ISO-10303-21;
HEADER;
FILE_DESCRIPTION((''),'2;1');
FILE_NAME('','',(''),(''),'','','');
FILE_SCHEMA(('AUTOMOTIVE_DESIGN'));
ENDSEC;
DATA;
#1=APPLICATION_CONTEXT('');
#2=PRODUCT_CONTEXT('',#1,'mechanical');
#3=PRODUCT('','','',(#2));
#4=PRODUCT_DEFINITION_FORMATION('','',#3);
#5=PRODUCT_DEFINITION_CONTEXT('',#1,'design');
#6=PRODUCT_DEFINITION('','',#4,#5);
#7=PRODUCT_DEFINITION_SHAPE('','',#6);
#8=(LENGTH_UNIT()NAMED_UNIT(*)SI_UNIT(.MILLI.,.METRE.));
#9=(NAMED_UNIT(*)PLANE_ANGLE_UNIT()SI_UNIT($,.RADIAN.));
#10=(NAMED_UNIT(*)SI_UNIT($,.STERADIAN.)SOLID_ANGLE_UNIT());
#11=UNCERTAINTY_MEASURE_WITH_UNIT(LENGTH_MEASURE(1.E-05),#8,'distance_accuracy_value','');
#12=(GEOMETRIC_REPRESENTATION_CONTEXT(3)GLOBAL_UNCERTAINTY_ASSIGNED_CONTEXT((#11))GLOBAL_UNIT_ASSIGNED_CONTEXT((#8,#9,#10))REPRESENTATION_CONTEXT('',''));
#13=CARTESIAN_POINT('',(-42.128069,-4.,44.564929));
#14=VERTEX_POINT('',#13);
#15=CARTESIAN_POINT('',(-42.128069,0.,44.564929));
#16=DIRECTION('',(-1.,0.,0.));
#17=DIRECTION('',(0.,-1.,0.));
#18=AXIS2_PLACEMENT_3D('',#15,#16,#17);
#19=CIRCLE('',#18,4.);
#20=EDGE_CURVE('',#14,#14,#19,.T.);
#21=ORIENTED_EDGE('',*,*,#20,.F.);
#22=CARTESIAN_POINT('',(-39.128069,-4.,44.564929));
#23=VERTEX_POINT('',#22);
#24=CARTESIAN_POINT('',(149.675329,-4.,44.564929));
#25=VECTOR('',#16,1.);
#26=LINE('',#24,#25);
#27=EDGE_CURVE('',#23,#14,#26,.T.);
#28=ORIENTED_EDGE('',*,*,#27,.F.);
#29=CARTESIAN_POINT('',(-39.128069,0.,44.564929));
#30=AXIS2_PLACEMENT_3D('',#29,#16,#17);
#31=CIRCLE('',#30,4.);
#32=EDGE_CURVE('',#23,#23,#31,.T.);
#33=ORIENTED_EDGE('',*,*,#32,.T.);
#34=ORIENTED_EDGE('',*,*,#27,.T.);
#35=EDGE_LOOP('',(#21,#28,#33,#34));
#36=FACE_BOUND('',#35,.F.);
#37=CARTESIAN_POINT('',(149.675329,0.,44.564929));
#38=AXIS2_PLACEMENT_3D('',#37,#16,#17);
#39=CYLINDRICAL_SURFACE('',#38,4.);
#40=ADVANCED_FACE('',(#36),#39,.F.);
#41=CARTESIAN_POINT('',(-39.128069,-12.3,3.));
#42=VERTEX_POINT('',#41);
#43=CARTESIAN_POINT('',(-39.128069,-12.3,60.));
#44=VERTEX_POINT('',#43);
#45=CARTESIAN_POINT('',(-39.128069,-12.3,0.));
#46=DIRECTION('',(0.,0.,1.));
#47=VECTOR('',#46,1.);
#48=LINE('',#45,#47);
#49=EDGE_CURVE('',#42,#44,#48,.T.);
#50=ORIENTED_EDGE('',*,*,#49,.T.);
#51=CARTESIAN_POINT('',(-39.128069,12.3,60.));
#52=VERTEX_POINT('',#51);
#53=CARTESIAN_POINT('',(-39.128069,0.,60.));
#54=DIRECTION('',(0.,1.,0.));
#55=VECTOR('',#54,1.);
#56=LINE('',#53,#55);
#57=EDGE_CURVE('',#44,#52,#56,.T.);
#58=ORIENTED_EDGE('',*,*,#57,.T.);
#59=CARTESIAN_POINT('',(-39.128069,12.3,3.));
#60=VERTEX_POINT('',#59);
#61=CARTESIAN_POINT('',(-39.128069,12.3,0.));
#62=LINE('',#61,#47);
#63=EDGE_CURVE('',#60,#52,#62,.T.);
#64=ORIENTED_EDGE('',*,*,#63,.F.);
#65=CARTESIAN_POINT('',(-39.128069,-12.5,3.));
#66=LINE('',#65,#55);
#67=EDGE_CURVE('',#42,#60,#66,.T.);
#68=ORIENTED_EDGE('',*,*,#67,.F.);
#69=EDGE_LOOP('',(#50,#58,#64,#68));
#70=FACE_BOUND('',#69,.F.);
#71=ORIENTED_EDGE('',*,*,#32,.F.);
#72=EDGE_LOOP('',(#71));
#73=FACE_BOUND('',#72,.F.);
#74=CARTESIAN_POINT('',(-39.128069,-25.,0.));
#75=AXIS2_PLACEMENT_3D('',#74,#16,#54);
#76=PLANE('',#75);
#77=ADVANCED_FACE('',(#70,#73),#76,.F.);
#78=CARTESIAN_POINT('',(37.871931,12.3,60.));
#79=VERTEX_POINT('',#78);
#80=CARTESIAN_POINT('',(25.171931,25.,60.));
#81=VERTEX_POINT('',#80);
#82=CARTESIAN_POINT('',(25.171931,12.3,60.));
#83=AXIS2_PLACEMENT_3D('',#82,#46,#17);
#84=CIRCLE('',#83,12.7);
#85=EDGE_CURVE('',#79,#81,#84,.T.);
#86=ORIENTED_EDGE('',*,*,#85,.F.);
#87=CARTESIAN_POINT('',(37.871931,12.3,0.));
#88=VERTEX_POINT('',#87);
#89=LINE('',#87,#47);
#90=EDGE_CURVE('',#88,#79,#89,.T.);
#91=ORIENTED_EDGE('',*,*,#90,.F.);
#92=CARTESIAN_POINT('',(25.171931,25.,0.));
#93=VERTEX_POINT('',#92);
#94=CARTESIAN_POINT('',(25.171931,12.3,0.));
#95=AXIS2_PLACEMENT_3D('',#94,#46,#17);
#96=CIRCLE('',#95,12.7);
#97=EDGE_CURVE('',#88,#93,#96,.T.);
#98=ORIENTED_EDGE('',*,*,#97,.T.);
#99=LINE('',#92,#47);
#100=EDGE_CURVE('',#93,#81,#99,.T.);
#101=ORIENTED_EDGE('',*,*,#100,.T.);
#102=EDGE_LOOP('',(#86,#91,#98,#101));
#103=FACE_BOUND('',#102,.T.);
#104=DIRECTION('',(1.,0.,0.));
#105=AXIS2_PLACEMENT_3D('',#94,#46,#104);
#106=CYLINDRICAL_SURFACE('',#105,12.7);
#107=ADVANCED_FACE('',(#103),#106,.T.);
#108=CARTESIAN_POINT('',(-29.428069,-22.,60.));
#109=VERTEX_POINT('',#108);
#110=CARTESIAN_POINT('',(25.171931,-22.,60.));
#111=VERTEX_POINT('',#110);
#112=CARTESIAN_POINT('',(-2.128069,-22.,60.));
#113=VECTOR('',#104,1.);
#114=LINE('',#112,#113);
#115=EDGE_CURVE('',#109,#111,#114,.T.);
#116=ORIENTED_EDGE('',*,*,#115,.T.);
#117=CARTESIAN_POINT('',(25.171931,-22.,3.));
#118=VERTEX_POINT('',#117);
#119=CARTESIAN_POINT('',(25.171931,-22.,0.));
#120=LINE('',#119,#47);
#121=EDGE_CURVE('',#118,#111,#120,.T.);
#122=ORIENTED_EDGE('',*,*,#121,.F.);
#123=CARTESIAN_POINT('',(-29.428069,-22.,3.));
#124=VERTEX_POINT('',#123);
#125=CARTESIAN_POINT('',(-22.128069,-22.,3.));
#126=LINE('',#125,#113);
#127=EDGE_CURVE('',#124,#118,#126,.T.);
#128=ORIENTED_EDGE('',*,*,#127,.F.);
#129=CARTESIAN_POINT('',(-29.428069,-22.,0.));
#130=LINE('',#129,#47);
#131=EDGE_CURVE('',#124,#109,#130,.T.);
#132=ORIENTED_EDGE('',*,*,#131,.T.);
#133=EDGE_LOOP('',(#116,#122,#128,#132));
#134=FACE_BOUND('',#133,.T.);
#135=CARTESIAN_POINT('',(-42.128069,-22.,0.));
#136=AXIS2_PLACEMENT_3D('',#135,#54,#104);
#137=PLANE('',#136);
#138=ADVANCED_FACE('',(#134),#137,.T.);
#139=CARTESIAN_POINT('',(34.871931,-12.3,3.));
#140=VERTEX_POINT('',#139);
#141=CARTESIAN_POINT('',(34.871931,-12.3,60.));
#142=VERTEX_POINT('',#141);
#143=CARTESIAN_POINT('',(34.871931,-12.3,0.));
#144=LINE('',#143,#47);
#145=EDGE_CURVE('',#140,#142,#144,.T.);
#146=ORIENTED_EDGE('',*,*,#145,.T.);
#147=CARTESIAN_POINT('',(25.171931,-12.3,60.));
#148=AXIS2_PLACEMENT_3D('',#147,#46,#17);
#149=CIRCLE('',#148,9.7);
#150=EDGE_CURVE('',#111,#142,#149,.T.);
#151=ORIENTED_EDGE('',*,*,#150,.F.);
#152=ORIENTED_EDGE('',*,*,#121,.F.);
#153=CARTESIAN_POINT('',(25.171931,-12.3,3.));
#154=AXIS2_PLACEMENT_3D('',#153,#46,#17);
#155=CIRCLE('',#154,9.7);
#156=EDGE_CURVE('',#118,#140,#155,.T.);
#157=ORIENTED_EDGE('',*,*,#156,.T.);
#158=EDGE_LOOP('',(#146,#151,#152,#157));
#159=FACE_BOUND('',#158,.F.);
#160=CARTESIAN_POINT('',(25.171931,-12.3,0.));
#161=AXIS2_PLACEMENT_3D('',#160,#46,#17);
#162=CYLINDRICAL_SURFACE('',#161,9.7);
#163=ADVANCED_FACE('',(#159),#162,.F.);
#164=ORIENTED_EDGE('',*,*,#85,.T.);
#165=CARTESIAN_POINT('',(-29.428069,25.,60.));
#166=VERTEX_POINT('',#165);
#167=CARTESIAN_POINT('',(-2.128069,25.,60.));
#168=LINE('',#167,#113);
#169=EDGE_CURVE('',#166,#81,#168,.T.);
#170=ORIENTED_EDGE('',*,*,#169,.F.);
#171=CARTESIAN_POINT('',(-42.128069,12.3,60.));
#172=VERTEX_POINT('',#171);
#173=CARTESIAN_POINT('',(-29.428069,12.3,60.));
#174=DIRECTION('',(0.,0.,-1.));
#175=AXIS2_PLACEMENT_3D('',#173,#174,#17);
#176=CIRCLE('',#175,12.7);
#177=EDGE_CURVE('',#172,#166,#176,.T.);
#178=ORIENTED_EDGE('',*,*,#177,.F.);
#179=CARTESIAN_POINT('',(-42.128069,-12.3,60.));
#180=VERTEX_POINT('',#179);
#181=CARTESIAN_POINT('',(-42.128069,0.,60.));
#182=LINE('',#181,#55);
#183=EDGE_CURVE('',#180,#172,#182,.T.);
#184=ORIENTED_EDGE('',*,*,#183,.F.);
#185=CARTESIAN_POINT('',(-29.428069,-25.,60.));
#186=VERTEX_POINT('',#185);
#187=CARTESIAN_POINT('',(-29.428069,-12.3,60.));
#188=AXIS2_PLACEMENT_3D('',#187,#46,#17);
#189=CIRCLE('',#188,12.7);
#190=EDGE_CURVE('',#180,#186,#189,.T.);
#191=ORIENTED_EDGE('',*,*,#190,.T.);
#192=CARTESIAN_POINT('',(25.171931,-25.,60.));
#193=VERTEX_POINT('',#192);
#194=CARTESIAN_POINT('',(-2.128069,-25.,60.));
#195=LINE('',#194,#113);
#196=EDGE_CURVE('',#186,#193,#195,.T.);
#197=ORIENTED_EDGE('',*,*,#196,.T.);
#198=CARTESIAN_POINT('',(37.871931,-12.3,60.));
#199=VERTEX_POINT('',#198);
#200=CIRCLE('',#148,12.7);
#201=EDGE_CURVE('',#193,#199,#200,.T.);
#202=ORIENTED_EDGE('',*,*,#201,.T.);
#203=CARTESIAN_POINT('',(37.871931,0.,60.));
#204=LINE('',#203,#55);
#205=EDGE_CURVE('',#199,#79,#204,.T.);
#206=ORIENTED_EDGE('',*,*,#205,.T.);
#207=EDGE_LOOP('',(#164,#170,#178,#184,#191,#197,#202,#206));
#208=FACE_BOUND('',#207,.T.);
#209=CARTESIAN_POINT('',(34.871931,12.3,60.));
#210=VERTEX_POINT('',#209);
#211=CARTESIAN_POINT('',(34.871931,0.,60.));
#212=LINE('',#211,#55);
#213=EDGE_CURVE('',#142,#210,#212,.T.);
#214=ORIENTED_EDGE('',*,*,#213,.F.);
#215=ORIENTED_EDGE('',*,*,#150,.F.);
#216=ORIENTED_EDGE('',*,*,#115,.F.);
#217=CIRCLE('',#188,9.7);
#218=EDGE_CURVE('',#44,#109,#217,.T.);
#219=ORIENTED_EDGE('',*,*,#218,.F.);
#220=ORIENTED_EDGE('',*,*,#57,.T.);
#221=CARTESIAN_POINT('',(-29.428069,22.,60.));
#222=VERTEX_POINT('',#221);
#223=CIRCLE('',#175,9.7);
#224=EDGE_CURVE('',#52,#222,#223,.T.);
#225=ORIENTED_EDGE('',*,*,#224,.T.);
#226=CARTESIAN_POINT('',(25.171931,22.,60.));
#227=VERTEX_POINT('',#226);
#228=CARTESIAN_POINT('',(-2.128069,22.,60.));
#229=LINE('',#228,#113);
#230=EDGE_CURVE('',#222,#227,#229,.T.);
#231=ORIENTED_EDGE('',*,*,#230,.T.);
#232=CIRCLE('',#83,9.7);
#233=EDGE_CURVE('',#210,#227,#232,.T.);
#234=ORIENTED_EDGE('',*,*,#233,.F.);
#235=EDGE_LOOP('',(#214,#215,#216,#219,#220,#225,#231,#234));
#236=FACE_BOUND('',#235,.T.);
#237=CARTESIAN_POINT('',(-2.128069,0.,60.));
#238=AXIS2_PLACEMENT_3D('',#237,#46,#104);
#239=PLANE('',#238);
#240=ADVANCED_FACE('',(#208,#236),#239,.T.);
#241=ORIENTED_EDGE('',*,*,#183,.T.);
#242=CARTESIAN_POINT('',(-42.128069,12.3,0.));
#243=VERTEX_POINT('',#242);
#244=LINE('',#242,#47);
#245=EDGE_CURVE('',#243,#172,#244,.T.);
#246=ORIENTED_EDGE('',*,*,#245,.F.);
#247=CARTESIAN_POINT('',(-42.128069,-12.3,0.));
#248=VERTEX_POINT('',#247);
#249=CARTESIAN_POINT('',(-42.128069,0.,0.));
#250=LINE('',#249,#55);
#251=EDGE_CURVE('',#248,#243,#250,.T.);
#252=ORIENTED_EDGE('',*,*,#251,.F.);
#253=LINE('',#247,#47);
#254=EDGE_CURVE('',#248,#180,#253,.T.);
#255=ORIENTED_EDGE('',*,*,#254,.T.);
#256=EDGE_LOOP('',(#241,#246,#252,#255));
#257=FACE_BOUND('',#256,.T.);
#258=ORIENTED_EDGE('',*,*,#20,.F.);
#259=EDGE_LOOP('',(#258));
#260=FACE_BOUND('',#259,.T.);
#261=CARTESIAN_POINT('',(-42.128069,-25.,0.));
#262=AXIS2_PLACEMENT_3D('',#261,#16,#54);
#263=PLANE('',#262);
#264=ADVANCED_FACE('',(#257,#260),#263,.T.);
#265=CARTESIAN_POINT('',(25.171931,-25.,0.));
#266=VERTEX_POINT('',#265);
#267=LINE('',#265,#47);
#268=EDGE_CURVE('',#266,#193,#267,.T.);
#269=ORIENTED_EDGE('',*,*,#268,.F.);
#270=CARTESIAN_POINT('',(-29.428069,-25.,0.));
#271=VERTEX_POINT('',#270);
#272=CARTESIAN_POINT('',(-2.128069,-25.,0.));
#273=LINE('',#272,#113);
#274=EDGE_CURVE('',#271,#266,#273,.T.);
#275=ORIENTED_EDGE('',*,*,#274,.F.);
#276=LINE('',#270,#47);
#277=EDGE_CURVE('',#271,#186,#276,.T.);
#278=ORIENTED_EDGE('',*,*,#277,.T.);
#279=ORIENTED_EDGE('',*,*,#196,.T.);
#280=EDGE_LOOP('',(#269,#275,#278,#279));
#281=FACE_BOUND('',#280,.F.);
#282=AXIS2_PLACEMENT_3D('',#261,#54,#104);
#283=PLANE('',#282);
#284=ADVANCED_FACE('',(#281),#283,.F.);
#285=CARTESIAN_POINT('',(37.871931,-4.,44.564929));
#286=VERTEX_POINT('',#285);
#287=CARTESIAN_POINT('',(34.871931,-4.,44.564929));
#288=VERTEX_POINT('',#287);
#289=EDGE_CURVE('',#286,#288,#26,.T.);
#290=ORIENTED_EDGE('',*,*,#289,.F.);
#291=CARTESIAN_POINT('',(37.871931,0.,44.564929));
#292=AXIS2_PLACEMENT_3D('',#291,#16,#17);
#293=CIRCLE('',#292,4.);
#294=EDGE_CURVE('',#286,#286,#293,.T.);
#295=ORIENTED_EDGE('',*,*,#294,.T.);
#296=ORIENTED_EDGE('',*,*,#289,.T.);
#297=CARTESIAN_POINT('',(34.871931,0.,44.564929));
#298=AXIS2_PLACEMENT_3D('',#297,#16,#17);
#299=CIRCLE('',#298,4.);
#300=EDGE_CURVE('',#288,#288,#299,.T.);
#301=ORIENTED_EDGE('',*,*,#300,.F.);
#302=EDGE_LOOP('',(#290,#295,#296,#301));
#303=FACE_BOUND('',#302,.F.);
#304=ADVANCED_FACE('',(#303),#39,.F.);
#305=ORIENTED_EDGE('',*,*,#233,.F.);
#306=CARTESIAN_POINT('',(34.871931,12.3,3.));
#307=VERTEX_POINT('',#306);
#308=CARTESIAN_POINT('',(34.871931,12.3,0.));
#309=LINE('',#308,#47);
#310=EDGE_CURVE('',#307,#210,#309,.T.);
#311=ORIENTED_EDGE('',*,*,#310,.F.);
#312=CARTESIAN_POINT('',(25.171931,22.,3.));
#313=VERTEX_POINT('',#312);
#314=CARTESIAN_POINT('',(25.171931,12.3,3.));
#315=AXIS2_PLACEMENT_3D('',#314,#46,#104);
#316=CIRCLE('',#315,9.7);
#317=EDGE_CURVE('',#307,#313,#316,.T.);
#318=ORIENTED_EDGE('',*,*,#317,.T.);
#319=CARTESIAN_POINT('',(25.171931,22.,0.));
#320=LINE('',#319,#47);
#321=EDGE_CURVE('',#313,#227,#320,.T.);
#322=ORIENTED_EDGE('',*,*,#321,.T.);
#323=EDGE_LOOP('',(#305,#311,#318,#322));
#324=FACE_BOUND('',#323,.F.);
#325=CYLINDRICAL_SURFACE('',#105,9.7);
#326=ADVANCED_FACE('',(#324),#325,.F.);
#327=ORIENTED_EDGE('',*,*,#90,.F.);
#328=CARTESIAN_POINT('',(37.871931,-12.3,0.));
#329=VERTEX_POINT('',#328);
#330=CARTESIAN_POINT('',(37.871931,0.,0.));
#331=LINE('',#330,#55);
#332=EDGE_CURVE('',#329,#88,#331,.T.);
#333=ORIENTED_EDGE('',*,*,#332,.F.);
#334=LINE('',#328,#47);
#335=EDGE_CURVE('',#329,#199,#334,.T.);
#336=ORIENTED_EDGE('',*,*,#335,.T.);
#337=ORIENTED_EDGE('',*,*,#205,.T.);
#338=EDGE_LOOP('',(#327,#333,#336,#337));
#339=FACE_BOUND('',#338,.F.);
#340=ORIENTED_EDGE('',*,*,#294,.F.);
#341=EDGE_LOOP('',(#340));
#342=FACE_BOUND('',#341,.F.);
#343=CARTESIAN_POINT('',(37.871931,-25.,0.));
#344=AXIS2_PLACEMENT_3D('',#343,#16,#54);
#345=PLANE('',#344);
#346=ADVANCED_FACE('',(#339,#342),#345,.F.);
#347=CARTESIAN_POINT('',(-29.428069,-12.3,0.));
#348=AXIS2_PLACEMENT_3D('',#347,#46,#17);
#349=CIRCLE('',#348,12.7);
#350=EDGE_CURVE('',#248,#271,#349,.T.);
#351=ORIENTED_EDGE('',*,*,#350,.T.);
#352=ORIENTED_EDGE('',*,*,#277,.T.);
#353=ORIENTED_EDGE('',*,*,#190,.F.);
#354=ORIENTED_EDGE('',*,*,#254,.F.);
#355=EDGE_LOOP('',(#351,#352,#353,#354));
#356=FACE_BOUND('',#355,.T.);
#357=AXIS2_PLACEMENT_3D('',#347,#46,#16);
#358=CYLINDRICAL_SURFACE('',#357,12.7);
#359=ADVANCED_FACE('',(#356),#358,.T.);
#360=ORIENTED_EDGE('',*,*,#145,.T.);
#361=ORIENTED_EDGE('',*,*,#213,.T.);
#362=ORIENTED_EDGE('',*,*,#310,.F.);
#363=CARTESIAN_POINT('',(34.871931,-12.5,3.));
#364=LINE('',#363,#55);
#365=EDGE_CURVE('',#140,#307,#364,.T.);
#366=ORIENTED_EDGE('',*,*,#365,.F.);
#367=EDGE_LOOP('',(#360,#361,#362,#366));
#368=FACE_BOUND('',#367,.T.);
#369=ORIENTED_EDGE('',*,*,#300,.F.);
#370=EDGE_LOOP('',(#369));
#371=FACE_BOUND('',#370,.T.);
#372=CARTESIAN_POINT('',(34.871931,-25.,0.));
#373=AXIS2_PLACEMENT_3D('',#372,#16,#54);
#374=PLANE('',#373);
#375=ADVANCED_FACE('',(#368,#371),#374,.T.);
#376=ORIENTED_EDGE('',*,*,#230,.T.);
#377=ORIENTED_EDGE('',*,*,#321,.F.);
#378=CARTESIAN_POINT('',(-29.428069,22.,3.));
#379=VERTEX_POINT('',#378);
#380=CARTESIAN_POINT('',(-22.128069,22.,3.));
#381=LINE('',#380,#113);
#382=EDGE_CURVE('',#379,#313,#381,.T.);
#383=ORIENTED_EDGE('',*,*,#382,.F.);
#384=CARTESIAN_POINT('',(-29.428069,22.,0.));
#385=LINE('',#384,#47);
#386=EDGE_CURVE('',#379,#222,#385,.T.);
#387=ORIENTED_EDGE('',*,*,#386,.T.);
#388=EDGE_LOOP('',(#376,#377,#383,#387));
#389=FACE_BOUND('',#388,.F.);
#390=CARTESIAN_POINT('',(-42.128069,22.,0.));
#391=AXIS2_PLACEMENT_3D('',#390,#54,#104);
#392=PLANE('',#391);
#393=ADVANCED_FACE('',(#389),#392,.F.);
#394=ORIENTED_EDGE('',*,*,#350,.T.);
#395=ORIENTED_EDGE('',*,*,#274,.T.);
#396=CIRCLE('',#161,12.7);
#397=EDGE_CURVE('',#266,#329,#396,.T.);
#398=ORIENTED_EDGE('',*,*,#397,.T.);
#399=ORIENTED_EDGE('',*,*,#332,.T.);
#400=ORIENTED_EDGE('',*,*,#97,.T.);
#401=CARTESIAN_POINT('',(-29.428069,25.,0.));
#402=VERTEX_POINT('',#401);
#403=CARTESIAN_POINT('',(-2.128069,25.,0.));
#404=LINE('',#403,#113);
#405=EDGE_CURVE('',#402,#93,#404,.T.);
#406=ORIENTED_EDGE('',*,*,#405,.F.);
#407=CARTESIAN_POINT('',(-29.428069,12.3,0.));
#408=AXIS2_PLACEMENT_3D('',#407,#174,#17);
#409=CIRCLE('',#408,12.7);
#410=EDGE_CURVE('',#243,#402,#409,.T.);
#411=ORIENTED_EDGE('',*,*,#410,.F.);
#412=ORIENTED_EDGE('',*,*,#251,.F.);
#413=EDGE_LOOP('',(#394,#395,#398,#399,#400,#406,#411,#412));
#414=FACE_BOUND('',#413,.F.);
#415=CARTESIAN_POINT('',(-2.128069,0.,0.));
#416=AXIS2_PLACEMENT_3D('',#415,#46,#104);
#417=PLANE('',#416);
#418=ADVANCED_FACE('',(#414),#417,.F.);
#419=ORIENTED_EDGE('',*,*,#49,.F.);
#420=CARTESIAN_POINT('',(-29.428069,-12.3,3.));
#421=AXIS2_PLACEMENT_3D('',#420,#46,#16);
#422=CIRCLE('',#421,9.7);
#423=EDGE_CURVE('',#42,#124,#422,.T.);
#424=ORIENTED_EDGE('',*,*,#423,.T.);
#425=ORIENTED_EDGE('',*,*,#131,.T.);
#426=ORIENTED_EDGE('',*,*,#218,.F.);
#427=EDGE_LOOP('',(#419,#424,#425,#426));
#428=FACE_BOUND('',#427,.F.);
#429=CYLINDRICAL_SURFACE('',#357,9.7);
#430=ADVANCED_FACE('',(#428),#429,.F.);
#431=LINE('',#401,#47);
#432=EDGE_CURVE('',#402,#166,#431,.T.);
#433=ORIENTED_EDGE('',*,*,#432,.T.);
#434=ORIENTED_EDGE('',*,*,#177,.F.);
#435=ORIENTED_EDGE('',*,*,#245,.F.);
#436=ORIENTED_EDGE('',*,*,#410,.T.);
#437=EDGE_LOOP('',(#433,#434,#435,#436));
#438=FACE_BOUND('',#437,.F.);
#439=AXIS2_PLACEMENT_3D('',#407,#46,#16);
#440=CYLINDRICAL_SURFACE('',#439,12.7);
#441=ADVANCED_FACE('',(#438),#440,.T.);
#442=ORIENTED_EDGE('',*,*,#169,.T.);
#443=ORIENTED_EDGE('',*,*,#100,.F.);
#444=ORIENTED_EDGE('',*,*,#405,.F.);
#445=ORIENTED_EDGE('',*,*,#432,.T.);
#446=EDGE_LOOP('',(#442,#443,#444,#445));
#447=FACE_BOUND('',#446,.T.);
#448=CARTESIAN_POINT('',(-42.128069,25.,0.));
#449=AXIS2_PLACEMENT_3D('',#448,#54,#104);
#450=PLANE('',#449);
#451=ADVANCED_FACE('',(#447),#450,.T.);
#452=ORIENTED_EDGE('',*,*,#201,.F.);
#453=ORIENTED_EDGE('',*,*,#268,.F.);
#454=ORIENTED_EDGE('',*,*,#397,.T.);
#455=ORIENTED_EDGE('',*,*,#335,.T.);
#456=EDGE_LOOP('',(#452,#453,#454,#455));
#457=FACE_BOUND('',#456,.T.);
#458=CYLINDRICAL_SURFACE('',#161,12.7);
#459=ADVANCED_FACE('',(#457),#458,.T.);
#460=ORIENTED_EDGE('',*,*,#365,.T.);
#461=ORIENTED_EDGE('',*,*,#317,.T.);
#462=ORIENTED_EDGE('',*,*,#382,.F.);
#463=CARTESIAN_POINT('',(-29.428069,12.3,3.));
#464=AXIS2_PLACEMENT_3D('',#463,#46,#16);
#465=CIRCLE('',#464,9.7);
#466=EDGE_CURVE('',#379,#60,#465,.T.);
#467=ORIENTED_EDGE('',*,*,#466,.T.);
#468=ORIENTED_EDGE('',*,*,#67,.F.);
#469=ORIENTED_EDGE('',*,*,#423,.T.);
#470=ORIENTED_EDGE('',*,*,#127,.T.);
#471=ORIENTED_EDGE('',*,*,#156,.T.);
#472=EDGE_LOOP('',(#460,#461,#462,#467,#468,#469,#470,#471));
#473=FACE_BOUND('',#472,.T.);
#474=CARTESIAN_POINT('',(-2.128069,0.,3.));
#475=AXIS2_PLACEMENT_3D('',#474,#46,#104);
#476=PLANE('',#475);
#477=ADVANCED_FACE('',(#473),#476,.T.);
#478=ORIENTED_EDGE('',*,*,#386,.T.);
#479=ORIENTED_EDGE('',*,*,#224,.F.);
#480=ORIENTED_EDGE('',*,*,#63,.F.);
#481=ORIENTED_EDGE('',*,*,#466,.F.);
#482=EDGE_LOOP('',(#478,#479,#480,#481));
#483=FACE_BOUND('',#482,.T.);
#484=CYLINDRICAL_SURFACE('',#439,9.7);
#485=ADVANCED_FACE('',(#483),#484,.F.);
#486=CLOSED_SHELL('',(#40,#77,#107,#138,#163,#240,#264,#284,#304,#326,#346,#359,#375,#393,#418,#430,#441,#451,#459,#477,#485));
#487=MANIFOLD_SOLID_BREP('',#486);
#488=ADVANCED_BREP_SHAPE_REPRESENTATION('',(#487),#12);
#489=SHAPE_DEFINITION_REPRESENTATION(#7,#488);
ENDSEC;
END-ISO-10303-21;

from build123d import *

# Parameters (mm, degrees)
F0_W     = 80
F0_H     = 50
F1_DEPTH = 60
F2_R     = 12.7
F3_T     = -3
F5_D     = 8


# Not quite as in the source:
# - a feature names something its author has since deleted; it is built from what else it names


with BuildPart() as f1:
    # F0 (on Top) → F1 (new body)
    with BuildSketch(Plane.XY):
        with Locations((-2.1280694621, 0)):
            Rectangle(F0_W, F0_H)
    extrude(amount=F1_DEPTH)

    # F2
    f2_edges = [f1.edges().sort_by_distance(p)[0] for p in [
        (-42.128069, -25, 30),
        (37.871931, 25, 30),
        (37.871931, -25, 30),
        (-42.128069, 25, 30),
    ]]
    fillet(f2_edges, radius=F2_R)

    # F3
    f3_openings = [f1.faces().sort_by_distance(p)[0] for p in [
        (-2.128069, 0, 60),
    ]]
    offset(amount=F3_T, openings=f3_openings)

    # F5 (through all)
    with Locations(Plane.YZ.offset(37.8719305379)):
        with Locations((0, 44.5649288595)):
            Hole(F5_D / 2)


solid = f1.part
